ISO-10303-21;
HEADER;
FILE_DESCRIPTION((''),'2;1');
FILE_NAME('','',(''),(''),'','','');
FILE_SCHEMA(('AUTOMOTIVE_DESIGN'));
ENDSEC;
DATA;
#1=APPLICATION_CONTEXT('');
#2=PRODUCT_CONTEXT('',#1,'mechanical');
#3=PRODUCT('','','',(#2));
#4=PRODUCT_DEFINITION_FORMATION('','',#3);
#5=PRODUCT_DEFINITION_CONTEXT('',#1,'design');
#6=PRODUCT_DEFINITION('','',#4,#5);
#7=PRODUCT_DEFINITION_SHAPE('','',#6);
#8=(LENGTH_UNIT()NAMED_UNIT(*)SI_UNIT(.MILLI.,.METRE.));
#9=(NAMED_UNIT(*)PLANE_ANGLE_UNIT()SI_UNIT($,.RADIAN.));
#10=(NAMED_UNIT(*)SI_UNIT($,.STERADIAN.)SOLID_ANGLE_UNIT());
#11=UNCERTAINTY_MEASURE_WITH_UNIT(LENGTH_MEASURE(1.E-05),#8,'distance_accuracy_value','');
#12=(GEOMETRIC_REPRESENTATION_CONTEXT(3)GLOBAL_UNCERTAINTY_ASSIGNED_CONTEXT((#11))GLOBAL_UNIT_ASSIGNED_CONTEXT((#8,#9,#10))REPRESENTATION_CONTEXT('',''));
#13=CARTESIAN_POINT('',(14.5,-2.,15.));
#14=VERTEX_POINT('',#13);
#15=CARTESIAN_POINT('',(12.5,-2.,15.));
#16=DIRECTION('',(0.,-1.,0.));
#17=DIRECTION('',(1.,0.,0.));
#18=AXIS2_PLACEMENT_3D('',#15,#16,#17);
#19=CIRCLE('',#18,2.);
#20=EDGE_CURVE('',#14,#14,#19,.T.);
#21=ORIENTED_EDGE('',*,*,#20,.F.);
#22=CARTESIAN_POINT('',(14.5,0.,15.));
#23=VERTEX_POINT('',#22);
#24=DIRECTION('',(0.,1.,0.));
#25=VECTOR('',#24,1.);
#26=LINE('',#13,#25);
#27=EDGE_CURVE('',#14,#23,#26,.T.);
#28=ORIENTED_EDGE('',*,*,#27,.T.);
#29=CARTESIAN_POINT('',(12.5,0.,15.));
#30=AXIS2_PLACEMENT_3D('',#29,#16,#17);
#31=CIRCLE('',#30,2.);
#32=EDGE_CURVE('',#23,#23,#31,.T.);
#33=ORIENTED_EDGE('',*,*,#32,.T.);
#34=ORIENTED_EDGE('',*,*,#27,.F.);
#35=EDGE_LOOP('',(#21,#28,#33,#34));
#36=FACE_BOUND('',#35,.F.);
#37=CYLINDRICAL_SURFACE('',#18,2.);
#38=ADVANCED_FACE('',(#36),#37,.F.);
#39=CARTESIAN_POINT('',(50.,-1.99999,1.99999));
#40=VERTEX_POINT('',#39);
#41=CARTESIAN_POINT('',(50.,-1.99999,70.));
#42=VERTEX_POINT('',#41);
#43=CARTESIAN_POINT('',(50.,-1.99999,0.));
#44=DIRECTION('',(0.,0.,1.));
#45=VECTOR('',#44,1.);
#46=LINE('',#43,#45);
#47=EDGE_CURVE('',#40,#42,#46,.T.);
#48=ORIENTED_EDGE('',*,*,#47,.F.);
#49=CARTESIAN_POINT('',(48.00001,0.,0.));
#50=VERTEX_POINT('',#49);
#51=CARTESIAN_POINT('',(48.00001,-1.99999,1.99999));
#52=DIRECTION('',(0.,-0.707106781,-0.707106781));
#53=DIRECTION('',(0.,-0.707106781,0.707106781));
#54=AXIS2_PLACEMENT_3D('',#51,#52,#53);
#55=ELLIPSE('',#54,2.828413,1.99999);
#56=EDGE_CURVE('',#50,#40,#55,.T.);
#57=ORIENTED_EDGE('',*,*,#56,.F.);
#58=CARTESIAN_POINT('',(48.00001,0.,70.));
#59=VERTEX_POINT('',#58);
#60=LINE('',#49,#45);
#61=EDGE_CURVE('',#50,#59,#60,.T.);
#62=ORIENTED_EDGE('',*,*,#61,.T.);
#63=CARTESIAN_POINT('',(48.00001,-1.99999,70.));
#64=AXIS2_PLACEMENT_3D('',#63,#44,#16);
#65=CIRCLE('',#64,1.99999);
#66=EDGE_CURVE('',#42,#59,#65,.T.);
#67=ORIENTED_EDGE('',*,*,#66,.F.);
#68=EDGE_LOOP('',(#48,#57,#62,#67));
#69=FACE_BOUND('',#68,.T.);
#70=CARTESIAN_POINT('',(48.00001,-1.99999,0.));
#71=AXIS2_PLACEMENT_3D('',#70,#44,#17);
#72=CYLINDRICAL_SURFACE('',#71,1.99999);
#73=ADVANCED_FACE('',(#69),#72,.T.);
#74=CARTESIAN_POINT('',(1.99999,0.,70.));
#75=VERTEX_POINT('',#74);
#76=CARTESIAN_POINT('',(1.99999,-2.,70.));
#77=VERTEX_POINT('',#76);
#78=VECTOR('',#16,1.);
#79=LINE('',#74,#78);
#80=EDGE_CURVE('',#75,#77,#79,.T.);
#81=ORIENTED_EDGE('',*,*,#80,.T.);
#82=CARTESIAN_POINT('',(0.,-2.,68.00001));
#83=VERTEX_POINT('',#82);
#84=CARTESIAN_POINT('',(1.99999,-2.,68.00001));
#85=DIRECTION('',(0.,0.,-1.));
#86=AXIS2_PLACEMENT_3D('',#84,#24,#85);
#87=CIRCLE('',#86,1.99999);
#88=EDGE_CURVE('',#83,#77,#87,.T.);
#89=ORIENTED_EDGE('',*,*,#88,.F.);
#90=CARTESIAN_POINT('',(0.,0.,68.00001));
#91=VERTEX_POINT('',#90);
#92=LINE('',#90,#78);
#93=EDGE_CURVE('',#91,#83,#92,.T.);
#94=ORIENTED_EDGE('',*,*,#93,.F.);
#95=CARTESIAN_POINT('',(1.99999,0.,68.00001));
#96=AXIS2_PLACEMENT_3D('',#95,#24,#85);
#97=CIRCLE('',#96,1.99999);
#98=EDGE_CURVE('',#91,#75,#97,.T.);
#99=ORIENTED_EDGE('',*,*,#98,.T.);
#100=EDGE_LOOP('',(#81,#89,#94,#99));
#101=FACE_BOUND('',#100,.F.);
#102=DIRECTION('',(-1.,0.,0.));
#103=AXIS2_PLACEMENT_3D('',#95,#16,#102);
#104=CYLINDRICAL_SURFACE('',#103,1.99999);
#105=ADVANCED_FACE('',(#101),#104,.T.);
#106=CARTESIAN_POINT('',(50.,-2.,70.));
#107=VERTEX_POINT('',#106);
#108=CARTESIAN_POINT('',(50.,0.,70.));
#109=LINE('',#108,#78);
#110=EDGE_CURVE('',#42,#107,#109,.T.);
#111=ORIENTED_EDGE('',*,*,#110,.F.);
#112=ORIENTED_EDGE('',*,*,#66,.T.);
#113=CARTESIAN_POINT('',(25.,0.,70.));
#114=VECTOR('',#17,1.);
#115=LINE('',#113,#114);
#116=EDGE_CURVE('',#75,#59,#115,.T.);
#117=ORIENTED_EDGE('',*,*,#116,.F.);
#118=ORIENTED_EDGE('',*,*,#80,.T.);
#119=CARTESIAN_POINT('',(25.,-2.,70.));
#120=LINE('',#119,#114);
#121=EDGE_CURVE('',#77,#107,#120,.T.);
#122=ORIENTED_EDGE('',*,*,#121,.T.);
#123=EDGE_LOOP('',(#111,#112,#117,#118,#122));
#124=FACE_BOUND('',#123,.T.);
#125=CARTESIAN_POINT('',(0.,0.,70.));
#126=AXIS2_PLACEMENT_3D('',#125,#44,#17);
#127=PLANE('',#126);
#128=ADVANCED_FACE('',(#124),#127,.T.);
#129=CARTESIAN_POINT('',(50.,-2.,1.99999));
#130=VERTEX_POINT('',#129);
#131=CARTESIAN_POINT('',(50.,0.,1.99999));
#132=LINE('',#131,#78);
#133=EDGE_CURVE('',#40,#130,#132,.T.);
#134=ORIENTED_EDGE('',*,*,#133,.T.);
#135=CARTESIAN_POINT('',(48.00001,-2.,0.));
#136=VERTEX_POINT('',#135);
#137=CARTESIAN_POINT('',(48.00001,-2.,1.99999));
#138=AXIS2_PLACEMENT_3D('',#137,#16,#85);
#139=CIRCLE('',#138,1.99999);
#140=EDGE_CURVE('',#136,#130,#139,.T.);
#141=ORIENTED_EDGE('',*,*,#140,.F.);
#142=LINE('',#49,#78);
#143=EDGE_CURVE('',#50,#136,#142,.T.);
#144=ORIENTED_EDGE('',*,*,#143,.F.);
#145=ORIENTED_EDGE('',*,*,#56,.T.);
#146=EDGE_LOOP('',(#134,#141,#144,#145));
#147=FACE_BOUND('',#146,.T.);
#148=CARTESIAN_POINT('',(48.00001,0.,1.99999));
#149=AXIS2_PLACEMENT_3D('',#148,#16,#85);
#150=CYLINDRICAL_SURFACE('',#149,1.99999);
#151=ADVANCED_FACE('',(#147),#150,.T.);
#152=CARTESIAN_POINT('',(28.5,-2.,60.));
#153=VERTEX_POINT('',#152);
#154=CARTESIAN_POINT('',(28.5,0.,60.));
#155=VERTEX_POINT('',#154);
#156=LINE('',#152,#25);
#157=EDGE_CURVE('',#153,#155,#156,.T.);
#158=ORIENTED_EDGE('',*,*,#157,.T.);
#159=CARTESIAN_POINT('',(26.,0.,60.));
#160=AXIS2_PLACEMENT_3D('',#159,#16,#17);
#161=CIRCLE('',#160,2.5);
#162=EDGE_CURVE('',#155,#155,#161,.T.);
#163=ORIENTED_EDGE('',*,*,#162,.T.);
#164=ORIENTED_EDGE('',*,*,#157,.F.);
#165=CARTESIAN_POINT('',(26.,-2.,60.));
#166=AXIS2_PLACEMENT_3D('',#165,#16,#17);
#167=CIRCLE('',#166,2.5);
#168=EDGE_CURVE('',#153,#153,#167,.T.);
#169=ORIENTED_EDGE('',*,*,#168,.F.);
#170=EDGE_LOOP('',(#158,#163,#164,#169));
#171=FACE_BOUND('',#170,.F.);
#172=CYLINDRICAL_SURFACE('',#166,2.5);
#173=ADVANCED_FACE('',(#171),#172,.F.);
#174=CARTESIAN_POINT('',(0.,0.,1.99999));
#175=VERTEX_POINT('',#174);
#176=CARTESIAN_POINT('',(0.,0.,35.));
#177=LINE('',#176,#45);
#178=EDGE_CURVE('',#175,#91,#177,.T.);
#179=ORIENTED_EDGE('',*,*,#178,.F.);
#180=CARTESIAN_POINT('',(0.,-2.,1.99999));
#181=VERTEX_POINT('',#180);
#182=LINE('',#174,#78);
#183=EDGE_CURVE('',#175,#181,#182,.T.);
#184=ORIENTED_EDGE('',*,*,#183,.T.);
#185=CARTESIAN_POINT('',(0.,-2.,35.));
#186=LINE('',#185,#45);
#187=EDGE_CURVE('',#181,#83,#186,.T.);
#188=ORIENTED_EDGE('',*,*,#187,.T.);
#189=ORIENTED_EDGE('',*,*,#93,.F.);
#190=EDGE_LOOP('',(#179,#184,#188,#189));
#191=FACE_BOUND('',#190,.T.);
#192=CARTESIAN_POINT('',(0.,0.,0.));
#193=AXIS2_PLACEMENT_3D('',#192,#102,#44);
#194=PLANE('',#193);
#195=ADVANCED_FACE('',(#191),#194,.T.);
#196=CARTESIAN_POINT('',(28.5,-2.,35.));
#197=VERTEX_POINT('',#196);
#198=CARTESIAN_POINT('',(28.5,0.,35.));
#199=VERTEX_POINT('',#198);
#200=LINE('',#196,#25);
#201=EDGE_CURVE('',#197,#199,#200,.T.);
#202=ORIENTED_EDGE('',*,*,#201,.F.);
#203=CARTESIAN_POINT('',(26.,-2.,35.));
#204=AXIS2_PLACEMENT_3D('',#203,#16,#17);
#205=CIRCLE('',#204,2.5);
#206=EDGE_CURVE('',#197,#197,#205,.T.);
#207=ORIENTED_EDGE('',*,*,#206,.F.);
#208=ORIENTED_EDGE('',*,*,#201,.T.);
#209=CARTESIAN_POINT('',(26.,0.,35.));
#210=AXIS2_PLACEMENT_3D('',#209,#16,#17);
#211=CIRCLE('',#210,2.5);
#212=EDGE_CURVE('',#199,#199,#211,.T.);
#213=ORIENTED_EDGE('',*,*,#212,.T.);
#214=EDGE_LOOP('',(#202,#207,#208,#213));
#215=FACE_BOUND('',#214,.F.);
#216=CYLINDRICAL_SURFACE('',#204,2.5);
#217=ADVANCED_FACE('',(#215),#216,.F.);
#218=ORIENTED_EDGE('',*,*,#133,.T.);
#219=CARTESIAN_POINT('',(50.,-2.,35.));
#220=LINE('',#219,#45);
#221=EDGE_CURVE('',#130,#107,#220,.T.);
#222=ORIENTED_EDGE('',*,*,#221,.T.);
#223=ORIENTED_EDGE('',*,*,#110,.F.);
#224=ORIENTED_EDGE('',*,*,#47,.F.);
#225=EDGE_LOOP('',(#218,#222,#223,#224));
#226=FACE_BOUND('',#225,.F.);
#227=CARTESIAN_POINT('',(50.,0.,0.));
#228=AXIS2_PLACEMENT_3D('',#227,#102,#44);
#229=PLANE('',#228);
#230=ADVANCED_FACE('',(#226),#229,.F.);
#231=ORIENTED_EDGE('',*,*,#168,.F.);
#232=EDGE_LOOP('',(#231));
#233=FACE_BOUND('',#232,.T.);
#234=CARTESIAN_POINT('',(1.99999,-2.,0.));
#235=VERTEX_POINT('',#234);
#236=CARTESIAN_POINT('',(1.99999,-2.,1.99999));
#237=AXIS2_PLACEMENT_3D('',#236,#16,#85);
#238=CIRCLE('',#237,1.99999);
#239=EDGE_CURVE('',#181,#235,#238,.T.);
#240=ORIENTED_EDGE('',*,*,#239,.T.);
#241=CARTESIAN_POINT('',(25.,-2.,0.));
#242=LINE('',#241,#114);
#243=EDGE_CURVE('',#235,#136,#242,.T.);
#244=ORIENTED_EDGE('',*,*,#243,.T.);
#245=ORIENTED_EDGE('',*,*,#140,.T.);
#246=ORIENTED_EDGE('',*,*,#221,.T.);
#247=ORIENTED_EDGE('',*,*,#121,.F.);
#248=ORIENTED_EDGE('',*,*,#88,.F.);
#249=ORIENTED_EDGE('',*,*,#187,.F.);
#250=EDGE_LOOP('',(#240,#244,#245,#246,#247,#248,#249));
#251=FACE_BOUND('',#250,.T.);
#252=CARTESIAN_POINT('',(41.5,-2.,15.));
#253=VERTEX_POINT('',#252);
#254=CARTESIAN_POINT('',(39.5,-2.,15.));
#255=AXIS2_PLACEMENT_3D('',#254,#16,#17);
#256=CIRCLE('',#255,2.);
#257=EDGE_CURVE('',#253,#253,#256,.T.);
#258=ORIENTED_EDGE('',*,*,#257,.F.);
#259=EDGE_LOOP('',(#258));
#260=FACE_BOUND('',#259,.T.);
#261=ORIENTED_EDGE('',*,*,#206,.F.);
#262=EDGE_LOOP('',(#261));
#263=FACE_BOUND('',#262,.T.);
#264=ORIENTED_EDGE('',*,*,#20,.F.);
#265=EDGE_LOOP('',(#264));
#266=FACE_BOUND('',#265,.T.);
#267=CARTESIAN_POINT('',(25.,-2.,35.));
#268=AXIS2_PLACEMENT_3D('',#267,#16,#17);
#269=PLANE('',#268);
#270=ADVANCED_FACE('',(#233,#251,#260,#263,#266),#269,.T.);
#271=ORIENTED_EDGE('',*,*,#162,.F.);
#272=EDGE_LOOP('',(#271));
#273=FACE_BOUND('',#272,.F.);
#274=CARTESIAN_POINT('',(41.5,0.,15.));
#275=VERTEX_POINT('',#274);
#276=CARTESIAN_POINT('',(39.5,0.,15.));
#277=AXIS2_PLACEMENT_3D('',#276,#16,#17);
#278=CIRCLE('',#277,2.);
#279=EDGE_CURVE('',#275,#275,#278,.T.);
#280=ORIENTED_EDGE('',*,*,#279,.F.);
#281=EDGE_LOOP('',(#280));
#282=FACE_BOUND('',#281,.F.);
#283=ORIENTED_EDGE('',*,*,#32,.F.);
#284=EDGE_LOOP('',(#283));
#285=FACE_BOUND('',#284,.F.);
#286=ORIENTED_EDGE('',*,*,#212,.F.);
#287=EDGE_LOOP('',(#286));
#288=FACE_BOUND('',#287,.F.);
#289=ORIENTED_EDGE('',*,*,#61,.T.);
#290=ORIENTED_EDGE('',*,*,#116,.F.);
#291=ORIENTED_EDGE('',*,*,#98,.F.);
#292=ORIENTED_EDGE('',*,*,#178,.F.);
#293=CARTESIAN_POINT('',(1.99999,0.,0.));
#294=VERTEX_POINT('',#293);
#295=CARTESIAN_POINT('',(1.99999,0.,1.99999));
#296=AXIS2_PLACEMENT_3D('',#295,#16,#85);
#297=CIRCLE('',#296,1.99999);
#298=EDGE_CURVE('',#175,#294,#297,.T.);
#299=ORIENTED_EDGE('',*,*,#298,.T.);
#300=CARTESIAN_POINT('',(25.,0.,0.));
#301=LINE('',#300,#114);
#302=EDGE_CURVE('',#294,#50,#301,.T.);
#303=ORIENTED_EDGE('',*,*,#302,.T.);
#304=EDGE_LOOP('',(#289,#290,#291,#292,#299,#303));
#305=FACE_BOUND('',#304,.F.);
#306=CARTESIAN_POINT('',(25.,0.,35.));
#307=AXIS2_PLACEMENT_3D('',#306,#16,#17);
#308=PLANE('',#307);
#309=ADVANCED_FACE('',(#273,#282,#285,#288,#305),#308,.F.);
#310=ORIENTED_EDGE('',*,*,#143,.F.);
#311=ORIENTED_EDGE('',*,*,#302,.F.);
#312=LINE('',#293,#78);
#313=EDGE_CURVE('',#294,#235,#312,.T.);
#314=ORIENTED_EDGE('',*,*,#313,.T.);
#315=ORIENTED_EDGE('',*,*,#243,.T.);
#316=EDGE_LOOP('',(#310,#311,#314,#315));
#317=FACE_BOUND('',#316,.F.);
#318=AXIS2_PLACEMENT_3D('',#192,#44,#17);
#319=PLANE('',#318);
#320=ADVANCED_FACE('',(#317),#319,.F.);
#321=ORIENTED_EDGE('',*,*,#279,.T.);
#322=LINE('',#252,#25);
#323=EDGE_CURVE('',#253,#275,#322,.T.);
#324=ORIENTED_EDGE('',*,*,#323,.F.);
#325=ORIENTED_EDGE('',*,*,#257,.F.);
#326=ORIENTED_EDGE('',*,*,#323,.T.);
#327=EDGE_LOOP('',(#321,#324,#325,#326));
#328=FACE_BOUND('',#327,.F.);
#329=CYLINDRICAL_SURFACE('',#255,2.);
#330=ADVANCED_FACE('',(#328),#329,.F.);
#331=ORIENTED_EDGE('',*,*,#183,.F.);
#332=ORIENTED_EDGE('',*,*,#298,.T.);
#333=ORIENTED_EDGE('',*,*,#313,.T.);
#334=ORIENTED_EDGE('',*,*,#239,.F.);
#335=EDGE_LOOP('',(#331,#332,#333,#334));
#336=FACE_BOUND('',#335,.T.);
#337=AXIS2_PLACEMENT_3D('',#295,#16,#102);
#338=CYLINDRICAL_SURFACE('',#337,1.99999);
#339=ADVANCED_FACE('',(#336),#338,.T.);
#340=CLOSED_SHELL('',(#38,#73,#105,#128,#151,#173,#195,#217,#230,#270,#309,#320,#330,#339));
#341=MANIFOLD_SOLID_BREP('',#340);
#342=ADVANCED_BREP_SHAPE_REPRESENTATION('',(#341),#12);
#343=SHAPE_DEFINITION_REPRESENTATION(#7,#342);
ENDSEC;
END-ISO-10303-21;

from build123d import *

# Parameters (mm, degrees)
F0_W     = 50
F0_H     = 70
F1_DEPTH = 2
F2_R     = 1.99999
F3_R     = 2
F3_R_2   = 2.5
F4_DEPTH = 2.001


# Not quite as in the source:
# - a fillet or chamfer is up to 0.001 mm smaller than in the source, because OpenCascade refuses the exact size


with BuildPart() as f1:
    # F0 (on Front) → F1 (new body)
    with BuildSketch(Plane.XZ):
        with Locations((25, 35)):
            Rectangle(F0_W, F0_H)
    extrude(amount=F1_DEPTH)

    # F2 (radius 2 in the source; OpenCascade refuses exactly that, so slightly less here)
    f2_edges = [f1.edges().sort_by_distance(p)[0] for p in [
        (0, -1, 0),
        (50, -1, 0),
        (50, 0, 35),
        (0, -1, 70),
    ]]
    fillet(f2_edges, radius=F2_R)

    # F3 (on face) → F4 (cut, through all)
    with BuildSketch(Plane.XZ.offset(2)):
        with Locations((12.5, 15)):
            Circle(F3_R)
        with Locations((39.5, 15)):
            Circle(F3_R)
        with Locations((26, 60)):
            Circle(F3_R_2)
        with Locations((26, 35)):
            Circle(F3_R_2)
    extrude(amount=-F4_DEPTH, mode=Mode.SUBTRACT)


solid = f1.part
